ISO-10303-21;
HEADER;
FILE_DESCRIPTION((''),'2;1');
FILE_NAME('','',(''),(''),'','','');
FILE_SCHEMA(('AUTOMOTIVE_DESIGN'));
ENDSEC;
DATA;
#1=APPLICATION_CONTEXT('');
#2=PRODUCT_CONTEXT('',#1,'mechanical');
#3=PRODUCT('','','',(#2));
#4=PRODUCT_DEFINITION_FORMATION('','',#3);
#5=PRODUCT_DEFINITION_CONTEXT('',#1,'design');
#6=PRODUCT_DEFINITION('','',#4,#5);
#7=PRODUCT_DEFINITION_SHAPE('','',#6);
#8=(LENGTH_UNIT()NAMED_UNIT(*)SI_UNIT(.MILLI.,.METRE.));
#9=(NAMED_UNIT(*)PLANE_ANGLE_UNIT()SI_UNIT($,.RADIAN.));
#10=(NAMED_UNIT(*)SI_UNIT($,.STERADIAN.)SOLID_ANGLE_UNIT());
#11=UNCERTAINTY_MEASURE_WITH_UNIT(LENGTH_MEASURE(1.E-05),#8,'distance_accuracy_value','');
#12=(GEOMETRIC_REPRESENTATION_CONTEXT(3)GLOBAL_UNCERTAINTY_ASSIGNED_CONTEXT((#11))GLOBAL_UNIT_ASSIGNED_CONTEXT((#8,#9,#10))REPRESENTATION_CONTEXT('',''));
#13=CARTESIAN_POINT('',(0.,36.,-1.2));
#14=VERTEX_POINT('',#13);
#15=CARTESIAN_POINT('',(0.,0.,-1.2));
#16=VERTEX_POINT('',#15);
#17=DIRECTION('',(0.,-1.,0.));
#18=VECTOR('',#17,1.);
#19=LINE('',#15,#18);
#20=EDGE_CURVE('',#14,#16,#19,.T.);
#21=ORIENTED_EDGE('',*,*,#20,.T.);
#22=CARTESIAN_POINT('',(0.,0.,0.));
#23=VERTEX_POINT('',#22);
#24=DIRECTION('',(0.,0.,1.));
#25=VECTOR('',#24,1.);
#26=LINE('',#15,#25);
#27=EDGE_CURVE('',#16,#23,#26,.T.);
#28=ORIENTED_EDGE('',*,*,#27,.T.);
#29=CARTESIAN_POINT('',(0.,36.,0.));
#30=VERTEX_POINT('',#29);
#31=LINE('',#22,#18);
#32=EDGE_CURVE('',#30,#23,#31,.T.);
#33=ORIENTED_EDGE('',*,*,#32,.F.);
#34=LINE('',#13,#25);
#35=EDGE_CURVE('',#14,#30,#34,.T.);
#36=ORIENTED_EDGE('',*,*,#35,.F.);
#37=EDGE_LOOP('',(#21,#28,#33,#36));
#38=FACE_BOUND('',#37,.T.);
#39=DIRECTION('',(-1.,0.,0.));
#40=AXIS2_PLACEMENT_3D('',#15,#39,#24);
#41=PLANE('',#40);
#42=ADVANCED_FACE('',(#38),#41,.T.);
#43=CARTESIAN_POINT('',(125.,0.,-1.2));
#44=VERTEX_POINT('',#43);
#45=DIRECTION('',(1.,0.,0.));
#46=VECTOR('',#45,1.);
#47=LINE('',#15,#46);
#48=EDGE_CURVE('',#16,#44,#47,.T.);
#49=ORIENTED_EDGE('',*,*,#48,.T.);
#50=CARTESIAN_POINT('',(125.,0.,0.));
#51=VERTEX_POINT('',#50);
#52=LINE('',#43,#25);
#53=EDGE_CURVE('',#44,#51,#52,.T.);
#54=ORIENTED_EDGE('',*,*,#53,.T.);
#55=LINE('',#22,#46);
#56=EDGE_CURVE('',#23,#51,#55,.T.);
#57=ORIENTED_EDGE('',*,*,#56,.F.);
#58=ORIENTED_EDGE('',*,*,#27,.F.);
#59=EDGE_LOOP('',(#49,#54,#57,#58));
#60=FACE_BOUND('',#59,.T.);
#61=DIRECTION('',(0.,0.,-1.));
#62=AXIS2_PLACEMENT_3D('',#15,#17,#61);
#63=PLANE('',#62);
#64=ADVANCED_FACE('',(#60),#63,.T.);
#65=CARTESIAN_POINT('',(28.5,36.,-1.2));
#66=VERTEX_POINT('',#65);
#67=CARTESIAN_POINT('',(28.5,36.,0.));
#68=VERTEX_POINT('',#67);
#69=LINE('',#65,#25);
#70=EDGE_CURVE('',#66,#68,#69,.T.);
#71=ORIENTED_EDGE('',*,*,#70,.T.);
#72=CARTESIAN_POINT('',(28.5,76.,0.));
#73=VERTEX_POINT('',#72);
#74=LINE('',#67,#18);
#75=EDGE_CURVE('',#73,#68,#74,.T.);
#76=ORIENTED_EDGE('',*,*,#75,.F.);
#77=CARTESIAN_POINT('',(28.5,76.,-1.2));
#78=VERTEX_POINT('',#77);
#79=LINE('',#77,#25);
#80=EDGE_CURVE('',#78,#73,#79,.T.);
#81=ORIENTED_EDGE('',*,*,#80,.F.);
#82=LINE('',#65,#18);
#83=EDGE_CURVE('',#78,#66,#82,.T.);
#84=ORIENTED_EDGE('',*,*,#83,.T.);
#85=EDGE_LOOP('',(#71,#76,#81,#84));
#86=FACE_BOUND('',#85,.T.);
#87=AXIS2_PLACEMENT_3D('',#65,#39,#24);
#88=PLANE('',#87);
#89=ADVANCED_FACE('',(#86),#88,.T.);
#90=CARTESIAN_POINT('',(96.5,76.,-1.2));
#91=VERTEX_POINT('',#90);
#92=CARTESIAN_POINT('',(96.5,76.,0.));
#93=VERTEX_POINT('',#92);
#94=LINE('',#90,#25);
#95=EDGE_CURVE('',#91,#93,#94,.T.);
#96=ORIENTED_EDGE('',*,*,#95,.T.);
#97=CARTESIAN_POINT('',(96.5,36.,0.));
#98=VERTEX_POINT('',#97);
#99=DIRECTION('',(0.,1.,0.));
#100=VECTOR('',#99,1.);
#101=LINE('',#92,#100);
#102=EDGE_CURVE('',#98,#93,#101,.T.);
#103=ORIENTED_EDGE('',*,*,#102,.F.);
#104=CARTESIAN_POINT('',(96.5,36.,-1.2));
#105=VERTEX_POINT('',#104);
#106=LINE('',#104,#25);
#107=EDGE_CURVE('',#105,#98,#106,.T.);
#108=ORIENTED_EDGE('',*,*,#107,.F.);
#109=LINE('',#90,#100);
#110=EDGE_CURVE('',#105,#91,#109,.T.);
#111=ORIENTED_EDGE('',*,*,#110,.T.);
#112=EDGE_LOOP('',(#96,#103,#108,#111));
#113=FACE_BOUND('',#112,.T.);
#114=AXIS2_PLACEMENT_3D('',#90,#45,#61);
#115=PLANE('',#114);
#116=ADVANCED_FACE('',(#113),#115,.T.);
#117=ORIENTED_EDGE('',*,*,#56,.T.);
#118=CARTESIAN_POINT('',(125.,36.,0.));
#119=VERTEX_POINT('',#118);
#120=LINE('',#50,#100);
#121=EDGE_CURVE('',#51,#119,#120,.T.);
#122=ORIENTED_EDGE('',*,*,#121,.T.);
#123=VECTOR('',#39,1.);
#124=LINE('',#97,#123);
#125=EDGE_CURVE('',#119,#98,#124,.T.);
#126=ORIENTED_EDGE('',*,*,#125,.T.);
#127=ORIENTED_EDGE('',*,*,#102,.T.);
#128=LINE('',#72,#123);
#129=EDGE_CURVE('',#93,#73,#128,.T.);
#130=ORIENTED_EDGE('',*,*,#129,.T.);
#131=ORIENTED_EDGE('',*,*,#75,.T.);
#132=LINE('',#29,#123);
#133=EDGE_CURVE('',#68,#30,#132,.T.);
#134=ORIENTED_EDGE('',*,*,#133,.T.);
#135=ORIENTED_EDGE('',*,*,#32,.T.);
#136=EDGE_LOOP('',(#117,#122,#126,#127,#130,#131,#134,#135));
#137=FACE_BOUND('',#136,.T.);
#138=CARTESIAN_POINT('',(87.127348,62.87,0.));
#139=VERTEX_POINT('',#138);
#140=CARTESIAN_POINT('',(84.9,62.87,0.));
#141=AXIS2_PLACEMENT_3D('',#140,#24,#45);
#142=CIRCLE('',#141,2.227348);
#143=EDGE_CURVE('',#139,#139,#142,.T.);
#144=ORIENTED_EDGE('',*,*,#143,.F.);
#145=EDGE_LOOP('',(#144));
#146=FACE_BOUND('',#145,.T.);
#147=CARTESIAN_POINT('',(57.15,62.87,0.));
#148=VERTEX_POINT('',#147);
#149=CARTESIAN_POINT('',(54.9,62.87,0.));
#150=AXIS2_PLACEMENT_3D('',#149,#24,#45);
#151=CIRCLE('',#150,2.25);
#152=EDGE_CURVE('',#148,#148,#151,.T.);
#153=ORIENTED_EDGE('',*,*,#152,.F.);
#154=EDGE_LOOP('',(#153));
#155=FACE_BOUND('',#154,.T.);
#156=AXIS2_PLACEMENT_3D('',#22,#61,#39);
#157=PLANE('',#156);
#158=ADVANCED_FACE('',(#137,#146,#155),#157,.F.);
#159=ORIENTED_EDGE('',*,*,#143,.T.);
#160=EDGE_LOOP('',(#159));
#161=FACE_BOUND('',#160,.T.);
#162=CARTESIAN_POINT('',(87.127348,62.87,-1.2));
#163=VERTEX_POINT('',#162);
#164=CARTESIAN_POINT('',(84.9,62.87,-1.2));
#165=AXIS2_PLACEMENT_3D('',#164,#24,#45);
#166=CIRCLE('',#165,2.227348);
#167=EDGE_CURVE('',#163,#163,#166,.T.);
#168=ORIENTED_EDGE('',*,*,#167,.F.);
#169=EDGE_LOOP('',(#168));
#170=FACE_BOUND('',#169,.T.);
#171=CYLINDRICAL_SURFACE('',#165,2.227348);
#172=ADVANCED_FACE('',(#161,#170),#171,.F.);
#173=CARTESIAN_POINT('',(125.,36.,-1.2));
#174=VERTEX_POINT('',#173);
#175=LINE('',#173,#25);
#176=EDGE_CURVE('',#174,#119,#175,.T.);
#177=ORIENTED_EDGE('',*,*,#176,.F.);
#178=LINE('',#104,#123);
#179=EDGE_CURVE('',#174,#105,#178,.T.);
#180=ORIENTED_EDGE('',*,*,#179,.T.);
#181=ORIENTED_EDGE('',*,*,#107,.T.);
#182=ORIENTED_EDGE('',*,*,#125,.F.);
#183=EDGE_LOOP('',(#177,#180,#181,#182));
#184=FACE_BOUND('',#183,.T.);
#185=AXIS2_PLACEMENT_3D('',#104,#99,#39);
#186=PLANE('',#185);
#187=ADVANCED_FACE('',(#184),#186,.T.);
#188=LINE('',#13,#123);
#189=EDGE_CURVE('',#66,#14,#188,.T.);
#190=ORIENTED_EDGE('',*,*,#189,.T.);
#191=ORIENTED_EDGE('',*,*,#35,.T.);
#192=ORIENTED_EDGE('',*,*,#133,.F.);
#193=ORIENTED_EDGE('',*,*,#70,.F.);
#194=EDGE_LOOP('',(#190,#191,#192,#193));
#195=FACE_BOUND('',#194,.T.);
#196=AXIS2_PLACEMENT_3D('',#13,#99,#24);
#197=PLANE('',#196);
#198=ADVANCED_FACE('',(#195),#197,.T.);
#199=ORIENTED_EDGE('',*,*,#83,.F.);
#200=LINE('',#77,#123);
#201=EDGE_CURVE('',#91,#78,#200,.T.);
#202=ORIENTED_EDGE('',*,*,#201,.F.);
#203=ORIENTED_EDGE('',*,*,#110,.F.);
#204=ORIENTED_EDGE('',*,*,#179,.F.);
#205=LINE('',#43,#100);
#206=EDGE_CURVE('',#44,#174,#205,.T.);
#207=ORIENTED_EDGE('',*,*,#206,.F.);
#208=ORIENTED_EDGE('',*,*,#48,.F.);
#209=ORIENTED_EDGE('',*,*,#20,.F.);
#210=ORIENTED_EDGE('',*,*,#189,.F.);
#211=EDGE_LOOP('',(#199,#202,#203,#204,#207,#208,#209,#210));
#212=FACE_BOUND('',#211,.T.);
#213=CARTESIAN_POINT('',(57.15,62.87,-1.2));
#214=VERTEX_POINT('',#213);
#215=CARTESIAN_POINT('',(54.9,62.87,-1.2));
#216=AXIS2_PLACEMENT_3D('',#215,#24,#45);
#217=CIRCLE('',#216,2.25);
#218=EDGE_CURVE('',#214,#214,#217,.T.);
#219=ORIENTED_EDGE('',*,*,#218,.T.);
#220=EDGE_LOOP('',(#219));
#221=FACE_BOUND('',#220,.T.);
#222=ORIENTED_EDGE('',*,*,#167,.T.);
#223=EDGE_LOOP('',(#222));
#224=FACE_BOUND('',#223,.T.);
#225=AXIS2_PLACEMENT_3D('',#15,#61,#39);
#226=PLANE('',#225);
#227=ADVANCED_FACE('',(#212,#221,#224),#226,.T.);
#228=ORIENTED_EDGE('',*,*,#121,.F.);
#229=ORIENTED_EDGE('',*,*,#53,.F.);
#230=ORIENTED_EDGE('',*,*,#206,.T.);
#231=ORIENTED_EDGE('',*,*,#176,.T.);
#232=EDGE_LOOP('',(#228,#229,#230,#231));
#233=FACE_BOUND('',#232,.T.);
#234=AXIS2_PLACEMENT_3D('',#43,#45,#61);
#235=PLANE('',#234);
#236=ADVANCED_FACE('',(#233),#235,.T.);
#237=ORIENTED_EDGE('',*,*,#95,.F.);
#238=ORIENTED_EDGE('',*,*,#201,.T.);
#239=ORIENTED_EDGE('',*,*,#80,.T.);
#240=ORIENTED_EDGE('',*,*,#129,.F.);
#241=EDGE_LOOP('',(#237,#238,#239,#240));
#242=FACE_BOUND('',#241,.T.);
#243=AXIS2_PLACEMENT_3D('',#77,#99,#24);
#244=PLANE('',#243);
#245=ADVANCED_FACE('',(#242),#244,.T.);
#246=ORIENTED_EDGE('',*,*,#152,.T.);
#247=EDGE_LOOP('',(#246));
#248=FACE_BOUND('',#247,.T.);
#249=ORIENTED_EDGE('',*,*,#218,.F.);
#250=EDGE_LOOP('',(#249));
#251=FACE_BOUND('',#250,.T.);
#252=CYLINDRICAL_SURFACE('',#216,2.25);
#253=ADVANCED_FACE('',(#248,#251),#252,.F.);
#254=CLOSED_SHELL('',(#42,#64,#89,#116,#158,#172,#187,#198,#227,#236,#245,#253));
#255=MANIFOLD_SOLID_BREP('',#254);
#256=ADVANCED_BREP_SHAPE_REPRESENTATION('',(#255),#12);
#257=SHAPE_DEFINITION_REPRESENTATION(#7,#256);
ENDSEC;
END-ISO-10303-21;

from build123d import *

# Parameters (mm, degrees)
SKETCH_1_R             = 2.25
SKETCH_1_R_2           = 2.227348473
SM_BASE_FLANGE_1_DEPTH = 1.2


# Sheet-metal steps are written as plain solids
with BuildPart() as part:
    # Sketch 1 → Базовая кромка1 (new body)
    with BuildSketch(Plane.XY):
        Polygon((28.5, 36), (28.5, 76), (96.5, 76), (96.5, 36), (125, 36), (125, 0), (0, 0), (0, 36), align=None)
        with Locations((54.9, 62.87)):
            Circle(SKETCH_1_R, mode=Mode.SUBTRACT)
        with Locations((84.9, 62.87)):
            Circle(SKETCH_1_R_2, mode=Mode.SUBTRACT)
    extrude(amount=-SM_BASE_FLANGE_1_DEPTH)


solid = part.part
